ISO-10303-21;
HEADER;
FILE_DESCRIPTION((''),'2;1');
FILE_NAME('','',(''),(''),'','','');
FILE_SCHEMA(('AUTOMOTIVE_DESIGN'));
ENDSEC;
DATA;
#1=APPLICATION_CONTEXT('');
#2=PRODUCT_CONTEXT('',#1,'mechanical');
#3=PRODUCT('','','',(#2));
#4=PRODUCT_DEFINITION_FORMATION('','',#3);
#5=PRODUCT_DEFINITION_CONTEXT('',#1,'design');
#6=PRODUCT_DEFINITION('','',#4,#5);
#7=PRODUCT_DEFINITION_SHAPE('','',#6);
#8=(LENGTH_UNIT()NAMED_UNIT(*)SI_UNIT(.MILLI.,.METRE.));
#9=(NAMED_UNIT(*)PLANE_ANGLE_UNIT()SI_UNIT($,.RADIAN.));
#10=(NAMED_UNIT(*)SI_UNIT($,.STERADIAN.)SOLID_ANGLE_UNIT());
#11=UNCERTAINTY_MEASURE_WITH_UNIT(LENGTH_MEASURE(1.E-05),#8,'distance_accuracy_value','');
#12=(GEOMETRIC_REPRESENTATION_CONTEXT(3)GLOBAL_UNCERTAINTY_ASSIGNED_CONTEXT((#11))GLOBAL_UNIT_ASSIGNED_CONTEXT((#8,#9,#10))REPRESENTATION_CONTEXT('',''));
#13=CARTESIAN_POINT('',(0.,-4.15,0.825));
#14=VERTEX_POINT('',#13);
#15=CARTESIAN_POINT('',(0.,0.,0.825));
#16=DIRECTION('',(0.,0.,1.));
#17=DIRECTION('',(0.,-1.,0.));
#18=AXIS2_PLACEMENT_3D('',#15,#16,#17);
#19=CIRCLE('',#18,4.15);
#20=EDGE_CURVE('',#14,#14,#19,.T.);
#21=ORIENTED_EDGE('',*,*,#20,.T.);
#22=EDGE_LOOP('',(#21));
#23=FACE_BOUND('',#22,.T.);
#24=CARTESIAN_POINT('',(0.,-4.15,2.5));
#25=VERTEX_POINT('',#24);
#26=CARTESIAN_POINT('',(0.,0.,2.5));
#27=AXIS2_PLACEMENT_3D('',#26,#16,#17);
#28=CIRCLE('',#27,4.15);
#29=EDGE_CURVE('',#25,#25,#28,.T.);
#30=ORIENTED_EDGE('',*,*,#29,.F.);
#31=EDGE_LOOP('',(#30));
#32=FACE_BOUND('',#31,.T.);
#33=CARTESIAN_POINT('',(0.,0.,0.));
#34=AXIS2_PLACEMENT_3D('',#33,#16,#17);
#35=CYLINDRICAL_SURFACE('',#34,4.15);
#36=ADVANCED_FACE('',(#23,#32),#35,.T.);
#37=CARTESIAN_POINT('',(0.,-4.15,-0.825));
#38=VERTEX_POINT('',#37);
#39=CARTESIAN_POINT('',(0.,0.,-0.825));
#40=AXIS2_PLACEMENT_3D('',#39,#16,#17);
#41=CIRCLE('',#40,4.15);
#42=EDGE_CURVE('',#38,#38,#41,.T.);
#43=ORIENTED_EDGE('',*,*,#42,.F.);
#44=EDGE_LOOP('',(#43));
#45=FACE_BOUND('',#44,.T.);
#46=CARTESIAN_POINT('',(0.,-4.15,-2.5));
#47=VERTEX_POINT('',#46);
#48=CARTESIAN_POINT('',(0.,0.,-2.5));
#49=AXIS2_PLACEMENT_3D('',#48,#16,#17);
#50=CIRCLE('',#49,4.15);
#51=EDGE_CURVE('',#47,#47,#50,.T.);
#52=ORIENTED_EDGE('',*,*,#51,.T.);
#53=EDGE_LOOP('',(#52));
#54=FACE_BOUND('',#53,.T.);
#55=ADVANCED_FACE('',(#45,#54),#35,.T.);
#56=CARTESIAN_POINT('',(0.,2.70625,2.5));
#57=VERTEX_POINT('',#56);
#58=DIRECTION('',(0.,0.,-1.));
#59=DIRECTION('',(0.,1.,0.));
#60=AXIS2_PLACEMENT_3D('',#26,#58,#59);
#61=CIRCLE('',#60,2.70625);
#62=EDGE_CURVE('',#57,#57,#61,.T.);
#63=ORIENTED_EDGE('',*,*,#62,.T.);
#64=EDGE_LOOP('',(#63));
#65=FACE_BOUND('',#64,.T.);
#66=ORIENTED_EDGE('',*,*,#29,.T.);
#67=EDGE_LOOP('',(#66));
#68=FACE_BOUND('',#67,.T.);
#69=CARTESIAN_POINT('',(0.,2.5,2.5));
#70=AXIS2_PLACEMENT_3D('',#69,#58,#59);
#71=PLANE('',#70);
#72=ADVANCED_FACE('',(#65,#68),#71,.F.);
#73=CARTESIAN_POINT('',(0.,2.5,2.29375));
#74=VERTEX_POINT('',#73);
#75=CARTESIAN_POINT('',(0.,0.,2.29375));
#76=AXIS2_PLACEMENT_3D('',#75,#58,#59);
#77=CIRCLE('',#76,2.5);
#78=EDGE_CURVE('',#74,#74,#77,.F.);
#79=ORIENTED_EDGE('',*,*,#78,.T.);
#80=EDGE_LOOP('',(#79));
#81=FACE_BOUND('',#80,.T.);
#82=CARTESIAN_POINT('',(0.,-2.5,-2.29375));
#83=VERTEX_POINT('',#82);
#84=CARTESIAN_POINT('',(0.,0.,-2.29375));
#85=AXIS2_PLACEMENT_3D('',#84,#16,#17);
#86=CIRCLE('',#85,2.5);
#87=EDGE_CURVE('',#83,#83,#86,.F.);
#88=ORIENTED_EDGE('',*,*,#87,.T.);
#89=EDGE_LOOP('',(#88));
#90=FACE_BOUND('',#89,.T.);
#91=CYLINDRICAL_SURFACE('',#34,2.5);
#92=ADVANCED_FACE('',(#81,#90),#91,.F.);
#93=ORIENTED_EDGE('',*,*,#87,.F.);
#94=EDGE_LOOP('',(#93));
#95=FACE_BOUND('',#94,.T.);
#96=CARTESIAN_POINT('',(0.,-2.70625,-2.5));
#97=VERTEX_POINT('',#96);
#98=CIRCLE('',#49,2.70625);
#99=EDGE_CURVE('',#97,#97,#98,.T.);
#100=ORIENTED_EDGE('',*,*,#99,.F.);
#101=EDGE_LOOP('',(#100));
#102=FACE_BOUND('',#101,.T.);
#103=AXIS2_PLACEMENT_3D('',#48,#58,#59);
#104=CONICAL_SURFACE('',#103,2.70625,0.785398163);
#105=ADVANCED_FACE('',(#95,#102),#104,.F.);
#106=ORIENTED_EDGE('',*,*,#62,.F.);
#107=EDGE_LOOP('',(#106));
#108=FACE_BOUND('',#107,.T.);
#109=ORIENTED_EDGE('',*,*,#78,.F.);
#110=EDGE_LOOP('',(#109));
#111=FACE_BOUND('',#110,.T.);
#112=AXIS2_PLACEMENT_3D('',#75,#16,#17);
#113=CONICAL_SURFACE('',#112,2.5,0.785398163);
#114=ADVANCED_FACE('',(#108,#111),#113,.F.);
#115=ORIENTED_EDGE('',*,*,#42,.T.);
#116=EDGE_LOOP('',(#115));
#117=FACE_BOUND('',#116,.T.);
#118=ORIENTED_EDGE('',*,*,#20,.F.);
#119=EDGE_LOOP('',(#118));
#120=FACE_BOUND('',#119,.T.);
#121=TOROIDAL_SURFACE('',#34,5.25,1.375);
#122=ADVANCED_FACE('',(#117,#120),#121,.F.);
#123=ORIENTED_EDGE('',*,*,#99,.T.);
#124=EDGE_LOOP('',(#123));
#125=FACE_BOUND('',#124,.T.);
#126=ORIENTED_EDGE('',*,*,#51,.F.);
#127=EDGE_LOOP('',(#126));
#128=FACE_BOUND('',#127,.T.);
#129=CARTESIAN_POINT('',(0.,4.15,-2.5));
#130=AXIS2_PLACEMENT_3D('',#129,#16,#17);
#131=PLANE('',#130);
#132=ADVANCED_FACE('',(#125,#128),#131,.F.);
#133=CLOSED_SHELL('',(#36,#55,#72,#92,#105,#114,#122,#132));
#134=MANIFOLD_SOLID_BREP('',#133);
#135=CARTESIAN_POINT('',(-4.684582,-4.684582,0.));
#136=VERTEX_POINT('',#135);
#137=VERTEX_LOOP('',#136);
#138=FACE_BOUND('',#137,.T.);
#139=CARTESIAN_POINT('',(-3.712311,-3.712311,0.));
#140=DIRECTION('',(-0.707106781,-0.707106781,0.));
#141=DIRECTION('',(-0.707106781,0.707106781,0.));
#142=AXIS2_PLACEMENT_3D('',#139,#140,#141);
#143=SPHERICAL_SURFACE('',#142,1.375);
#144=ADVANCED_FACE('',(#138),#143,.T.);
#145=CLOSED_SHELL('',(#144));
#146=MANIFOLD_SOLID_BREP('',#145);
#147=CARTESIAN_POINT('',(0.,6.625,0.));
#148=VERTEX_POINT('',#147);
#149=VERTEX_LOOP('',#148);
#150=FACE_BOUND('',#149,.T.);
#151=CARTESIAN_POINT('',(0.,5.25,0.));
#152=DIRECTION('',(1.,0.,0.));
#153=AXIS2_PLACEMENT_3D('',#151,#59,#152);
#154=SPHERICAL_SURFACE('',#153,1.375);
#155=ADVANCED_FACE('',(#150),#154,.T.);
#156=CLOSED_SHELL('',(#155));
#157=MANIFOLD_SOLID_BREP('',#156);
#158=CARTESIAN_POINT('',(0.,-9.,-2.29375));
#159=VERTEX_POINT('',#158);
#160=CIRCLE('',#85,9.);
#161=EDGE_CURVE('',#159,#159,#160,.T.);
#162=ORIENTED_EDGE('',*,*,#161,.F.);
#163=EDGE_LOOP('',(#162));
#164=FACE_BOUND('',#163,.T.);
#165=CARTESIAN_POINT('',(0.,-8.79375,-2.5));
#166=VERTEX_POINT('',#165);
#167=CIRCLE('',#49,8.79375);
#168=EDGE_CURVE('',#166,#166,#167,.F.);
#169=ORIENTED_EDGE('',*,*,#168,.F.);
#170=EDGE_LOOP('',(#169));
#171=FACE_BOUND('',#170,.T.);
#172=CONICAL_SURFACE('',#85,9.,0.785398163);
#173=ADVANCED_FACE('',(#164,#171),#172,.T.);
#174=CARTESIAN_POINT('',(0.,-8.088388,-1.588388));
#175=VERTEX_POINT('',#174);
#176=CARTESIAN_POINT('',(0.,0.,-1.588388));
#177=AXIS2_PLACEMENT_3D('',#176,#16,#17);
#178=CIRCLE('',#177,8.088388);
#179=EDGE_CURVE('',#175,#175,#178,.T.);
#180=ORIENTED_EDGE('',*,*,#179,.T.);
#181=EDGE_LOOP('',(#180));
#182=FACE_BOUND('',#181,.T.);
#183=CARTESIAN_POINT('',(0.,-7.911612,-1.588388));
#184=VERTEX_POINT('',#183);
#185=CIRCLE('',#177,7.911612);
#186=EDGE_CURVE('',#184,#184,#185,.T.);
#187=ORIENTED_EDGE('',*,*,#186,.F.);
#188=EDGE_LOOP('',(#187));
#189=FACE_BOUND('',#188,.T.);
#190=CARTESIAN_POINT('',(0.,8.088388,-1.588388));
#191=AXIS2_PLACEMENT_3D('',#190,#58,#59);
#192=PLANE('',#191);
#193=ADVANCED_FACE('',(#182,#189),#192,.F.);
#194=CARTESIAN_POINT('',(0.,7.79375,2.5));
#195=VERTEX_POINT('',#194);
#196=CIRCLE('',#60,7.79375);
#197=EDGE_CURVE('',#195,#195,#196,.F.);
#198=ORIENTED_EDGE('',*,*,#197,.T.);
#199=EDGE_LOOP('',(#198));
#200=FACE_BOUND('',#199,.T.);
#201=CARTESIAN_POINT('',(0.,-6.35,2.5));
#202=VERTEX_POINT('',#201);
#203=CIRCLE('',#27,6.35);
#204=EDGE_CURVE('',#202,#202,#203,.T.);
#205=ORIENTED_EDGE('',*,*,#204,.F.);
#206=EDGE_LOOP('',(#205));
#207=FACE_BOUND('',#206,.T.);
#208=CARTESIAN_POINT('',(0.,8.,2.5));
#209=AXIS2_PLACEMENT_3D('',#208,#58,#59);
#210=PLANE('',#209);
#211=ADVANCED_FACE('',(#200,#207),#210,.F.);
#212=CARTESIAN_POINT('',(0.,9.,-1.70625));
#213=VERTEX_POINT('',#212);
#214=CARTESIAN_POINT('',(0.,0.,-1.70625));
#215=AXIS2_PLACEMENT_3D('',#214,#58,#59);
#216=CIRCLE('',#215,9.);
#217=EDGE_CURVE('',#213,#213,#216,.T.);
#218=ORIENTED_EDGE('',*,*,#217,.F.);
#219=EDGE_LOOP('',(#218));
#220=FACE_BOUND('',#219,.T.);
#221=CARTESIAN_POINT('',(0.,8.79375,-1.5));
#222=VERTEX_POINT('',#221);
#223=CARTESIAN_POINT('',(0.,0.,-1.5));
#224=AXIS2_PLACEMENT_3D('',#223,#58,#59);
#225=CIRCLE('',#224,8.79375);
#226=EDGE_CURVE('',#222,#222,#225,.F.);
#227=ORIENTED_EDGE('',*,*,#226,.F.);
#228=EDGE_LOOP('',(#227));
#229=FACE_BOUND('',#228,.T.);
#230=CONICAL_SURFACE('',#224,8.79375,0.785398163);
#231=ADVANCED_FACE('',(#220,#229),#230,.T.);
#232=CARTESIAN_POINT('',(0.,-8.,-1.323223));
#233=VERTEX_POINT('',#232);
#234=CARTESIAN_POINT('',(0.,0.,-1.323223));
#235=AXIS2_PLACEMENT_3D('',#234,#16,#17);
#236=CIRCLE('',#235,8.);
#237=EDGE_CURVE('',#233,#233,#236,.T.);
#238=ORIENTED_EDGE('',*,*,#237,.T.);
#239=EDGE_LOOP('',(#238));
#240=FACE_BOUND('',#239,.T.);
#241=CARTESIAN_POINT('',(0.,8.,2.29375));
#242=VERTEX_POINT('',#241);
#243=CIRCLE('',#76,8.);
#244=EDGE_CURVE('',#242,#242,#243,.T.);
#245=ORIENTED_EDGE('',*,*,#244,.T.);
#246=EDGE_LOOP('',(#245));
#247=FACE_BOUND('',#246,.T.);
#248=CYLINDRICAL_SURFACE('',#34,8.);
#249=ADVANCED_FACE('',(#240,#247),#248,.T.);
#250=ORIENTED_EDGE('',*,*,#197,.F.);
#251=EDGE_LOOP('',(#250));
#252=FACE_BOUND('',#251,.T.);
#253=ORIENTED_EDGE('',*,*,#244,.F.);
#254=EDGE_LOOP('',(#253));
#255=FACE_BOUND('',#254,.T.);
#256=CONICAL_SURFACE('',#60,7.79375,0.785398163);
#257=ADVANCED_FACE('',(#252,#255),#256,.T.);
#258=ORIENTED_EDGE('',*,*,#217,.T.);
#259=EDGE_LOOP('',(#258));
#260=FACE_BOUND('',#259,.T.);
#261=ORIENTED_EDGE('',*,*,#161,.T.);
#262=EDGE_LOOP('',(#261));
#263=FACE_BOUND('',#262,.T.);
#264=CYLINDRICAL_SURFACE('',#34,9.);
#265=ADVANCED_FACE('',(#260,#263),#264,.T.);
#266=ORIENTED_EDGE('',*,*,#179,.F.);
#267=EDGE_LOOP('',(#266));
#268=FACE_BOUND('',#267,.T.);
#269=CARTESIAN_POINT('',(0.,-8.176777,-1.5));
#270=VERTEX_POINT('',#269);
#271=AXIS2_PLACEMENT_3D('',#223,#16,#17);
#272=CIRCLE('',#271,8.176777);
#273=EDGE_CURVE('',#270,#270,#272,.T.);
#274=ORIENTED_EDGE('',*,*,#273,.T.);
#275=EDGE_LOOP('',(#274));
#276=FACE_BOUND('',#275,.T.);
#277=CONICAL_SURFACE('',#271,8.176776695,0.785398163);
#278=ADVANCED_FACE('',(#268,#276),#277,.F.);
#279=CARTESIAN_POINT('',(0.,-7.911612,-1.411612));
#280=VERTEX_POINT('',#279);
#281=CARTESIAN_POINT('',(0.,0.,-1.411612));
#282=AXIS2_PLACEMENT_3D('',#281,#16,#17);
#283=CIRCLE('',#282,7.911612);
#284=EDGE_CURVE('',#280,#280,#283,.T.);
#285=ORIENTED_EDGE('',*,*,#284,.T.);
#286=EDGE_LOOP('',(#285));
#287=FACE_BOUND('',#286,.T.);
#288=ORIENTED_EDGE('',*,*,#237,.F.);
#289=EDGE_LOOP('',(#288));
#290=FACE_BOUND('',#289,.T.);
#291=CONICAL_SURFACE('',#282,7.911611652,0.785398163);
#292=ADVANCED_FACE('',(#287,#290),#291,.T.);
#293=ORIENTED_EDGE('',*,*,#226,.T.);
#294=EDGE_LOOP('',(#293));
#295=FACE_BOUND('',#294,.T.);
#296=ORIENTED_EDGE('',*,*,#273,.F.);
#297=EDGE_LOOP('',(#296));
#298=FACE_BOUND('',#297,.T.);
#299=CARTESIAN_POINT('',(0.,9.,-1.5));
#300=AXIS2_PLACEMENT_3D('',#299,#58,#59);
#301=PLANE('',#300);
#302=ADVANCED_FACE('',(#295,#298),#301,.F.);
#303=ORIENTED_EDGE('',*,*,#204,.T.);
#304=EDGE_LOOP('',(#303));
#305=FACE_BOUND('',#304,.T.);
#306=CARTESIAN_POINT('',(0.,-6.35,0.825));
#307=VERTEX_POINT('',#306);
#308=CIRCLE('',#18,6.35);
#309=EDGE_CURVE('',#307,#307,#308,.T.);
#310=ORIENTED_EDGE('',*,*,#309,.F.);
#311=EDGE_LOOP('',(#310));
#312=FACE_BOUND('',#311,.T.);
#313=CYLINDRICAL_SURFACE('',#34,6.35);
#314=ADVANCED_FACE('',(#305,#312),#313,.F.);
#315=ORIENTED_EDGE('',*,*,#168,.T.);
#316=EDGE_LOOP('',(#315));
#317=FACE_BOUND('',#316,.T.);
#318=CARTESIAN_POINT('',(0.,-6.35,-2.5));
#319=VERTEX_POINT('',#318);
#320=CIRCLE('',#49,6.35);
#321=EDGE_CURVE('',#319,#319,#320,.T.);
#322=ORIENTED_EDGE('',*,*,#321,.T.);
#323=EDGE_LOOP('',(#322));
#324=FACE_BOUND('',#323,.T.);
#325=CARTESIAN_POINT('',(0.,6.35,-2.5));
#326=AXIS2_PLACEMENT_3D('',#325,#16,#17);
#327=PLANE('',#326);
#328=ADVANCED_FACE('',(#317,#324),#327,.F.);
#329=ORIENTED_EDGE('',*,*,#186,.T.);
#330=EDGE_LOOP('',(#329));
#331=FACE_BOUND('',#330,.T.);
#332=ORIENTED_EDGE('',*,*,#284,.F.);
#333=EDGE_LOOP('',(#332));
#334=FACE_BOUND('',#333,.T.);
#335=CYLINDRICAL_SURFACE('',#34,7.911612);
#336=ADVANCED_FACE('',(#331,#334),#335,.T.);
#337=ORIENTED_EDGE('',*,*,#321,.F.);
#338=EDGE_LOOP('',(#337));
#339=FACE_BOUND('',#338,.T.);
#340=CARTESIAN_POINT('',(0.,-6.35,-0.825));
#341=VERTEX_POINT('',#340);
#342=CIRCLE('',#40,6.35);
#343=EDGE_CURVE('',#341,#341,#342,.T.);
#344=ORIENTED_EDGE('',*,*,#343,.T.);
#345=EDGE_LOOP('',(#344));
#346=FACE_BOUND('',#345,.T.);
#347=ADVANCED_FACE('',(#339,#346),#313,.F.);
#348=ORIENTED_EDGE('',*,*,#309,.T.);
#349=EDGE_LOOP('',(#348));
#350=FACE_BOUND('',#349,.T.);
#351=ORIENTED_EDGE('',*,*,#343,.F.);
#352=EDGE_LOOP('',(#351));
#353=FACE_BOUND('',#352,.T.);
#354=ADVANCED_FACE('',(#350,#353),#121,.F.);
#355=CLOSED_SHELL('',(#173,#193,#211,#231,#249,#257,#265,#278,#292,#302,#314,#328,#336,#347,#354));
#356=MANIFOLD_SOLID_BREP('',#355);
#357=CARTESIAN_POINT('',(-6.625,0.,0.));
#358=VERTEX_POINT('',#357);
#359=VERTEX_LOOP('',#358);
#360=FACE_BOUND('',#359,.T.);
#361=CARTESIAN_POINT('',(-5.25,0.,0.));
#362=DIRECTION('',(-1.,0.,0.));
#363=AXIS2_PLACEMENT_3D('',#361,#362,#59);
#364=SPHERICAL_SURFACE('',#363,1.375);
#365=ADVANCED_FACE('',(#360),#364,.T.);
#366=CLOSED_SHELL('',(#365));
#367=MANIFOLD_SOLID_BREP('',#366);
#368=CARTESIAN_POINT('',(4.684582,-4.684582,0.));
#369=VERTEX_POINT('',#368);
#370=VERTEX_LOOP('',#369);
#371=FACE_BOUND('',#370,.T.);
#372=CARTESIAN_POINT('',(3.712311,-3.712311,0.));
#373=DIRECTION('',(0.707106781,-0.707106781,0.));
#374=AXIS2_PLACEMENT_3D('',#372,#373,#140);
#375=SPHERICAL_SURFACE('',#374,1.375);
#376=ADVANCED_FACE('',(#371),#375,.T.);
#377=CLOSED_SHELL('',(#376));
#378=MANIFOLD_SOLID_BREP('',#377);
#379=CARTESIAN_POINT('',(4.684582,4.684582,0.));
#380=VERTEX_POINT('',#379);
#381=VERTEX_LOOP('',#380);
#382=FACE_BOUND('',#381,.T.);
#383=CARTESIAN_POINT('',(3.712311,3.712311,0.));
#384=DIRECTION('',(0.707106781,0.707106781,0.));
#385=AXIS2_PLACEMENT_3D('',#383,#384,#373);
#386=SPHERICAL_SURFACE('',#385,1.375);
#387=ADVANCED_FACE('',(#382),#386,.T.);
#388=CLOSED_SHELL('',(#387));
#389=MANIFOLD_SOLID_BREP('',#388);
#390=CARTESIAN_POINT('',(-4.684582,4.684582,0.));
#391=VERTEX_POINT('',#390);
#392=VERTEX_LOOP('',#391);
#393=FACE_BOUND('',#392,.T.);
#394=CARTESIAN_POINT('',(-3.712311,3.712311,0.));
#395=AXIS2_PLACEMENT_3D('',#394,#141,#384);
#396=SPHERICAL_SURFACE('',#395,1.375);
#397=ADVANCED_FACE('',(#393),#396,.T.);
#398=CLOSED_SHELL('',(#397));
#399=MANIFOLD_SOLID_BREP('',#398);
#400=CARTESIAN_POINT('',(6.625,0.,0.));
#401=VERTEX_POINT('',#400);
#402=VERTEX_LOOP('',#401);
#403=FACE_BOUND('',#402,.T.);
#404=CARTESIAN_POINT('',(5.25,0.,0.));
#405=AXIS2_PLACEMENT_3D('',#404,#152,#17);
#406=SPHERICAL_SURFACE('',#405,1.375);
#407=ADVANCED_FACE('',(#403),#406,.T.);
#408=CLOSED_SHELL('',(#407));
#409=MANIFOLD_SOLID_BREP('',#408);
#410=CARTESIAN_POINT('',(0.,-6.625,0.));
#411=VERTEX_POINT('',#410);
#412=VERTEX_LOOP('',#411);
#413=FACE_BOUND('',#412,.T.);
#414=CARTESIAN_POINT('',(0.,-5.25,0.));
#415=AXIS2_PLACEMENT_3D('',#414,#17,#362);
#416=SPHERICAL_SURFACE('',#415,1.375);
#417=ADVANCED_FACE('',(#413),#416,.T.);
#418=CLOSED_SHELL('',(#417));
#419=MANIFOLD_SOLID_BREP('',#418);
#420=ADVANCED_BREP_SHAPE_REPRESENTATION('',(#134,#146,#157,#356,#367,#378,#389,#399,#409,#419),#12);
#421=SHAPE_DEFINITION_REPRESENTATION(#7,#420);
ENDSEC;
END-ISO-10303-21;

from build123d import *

# Parameters (mm, degrees)
FILLET1_SIZE      = 0.20625
FILLET2_SIZE      = 0.20625
CIRPATTERN3_COUNT = 8


with BuildPart() as part:
    # Sketch2 → Revolve1 (revolve)
    with BuildSketch(Plane(origin=(0, 0, 0), x_dir=(0, 0, -1), z_dir=(1, 0, 0))):
        with BuildLine():
            Line((2.5, 9), (1.5, 9))
            Line((1.5, 9), (1.5, 8.176776695))
            Line((1.5, 8.176776695), (1.588388348, 8.088388348))
            Line((1.588388348, 8.088388348), (1.588388348, 7.911611652))
            Line((1.588388348, 7.911611652), (1.411611652, 7.911611652))
            Line((1.411611652, 7.911611652), (1.323223305, 8))
            Line((1.323223305, 8), (-2.5, 8))
            Line((-2.5, 8), (-2.5, 6.35))
            Line((-2.5, 6.35), (-0.825, 6.35))
            ThreePointArc((-0.825, 6.35), (0, 6.625), (0.825, 6.35))
            Line((0.825, 6.35), (2.5, 6.35))
            Line((2.5, 6.35), (2.5, 9))
        make_face()
        with BuildLine():
            Line((2.5, 2.5), (-2.5, 2.5))
            Line((-2.5, 2.5), (-2.5, 4.15))
            Line((-2.5, 4.15), (-0.825, 4.15))
            ThreePointArc((-0.825, 4.15), (0, 3.875), (0.825, 4.15))
            Line((0.825, 4.15), (2.5, 4.15))
            Line((2.5, 4.15), (2.5, 2.5))
        make_face()
    revolve(axis=Axis((0, 0, 0), (0, 0, -1)))

    # Fillet1
    fillet1_edges = [part.edges().sort_by_distance(p)[0] for p in [
        (0, -9, -2.5),
        (0, -9, -1.5),
        (0, -8, 2.5),
    ]]
    chamfer(fillet1_edges, length=FILLET1_SIZE)

    # Fillet2
    fillet2_edges = [part.edges().sort_by_distance(p)[0] for p in [
        (0, -2.5, -2.5),
        (0, -2.5, 2.5),
    ]]
    chamfer(fillet2_edges, length=FILLET2_SIZE)


with BuildPart() as body_2:
    # Sketch7 → Revolve3 (revolve)
    with BuildSketch(Plane.XY):
        with BuildLine():
            Line((0, 6.625), (0, 3.875))
            ThreePointArc((0, 3.875), (-1.375, 5.25), (0, 6.625))
        make_face()
    revolve(axis=Axis((0, 6.625, 0), (0, -1, 0)))


with BuildPart() as cirpattern3_1:
    # CirPattern3: pattern copy
    add(body_2.part.rotate(Axis((0, 0, 0), (0, 0, -1)), 1 * 360 / CIRPATTERN3_COUNT))


with BuildPart() as cirpattern3_2:
    # CirPattern3: pattern copy
    add(body_2.part.rotate(Axis((0, 0, 0), (0, 0, -1)), 2 * 360 / CIRPATTERN3_COUNT))


with BuildPart() as cirpattern3_3:
    # CirPattern3: pattern copy
    add(body_2.part.rotate(Axis((0, 0, 0), (0, 0, -1)), 3 * 360 / CIRPATTERN3_COUNT))


with BuildPart() as cirpattern3_4:
    # CirPattern3: pattern copy
    add(body_2.part.rotate(Axis((0, 0, 0), (0, 0, -1)), 4 * 360 / CIRPATTERN3_COUNT))


with BuildPart() as cirpattern3_5:
    # CirPattern3: pattern copy
    add(body_2.part.rotate(Axis((0, 0, 0), (0, 0, -1)), 5 * 360 / CIRPATTERN3_COUNT))


with BuildPart() as cirpattern3_6:
    # CirPattern3: pattern copy
    add(body_2.part.rotate(Axis((0, 0, 0), (0, 0, -1)), 6 * 360 / CIRPATTERN3_COUNT))


with BuildPart() as cirpattern3_7:
    # CirPattern3: pattern copy
    add(body_2.part.rotate(Axis((0, 0, 0), (0, 0, -1)), 7 * 360 / CIRPATTERN3_COUNT))


solid = Compound([part.part, body_2.part, cirpattern3_1.part, cirpattern3_2.part, cirpattern3_3.part, cirpattern3_4.part, cirpattern3_5.part, cirpattern3_6.part, cirpattern3_7.part])
